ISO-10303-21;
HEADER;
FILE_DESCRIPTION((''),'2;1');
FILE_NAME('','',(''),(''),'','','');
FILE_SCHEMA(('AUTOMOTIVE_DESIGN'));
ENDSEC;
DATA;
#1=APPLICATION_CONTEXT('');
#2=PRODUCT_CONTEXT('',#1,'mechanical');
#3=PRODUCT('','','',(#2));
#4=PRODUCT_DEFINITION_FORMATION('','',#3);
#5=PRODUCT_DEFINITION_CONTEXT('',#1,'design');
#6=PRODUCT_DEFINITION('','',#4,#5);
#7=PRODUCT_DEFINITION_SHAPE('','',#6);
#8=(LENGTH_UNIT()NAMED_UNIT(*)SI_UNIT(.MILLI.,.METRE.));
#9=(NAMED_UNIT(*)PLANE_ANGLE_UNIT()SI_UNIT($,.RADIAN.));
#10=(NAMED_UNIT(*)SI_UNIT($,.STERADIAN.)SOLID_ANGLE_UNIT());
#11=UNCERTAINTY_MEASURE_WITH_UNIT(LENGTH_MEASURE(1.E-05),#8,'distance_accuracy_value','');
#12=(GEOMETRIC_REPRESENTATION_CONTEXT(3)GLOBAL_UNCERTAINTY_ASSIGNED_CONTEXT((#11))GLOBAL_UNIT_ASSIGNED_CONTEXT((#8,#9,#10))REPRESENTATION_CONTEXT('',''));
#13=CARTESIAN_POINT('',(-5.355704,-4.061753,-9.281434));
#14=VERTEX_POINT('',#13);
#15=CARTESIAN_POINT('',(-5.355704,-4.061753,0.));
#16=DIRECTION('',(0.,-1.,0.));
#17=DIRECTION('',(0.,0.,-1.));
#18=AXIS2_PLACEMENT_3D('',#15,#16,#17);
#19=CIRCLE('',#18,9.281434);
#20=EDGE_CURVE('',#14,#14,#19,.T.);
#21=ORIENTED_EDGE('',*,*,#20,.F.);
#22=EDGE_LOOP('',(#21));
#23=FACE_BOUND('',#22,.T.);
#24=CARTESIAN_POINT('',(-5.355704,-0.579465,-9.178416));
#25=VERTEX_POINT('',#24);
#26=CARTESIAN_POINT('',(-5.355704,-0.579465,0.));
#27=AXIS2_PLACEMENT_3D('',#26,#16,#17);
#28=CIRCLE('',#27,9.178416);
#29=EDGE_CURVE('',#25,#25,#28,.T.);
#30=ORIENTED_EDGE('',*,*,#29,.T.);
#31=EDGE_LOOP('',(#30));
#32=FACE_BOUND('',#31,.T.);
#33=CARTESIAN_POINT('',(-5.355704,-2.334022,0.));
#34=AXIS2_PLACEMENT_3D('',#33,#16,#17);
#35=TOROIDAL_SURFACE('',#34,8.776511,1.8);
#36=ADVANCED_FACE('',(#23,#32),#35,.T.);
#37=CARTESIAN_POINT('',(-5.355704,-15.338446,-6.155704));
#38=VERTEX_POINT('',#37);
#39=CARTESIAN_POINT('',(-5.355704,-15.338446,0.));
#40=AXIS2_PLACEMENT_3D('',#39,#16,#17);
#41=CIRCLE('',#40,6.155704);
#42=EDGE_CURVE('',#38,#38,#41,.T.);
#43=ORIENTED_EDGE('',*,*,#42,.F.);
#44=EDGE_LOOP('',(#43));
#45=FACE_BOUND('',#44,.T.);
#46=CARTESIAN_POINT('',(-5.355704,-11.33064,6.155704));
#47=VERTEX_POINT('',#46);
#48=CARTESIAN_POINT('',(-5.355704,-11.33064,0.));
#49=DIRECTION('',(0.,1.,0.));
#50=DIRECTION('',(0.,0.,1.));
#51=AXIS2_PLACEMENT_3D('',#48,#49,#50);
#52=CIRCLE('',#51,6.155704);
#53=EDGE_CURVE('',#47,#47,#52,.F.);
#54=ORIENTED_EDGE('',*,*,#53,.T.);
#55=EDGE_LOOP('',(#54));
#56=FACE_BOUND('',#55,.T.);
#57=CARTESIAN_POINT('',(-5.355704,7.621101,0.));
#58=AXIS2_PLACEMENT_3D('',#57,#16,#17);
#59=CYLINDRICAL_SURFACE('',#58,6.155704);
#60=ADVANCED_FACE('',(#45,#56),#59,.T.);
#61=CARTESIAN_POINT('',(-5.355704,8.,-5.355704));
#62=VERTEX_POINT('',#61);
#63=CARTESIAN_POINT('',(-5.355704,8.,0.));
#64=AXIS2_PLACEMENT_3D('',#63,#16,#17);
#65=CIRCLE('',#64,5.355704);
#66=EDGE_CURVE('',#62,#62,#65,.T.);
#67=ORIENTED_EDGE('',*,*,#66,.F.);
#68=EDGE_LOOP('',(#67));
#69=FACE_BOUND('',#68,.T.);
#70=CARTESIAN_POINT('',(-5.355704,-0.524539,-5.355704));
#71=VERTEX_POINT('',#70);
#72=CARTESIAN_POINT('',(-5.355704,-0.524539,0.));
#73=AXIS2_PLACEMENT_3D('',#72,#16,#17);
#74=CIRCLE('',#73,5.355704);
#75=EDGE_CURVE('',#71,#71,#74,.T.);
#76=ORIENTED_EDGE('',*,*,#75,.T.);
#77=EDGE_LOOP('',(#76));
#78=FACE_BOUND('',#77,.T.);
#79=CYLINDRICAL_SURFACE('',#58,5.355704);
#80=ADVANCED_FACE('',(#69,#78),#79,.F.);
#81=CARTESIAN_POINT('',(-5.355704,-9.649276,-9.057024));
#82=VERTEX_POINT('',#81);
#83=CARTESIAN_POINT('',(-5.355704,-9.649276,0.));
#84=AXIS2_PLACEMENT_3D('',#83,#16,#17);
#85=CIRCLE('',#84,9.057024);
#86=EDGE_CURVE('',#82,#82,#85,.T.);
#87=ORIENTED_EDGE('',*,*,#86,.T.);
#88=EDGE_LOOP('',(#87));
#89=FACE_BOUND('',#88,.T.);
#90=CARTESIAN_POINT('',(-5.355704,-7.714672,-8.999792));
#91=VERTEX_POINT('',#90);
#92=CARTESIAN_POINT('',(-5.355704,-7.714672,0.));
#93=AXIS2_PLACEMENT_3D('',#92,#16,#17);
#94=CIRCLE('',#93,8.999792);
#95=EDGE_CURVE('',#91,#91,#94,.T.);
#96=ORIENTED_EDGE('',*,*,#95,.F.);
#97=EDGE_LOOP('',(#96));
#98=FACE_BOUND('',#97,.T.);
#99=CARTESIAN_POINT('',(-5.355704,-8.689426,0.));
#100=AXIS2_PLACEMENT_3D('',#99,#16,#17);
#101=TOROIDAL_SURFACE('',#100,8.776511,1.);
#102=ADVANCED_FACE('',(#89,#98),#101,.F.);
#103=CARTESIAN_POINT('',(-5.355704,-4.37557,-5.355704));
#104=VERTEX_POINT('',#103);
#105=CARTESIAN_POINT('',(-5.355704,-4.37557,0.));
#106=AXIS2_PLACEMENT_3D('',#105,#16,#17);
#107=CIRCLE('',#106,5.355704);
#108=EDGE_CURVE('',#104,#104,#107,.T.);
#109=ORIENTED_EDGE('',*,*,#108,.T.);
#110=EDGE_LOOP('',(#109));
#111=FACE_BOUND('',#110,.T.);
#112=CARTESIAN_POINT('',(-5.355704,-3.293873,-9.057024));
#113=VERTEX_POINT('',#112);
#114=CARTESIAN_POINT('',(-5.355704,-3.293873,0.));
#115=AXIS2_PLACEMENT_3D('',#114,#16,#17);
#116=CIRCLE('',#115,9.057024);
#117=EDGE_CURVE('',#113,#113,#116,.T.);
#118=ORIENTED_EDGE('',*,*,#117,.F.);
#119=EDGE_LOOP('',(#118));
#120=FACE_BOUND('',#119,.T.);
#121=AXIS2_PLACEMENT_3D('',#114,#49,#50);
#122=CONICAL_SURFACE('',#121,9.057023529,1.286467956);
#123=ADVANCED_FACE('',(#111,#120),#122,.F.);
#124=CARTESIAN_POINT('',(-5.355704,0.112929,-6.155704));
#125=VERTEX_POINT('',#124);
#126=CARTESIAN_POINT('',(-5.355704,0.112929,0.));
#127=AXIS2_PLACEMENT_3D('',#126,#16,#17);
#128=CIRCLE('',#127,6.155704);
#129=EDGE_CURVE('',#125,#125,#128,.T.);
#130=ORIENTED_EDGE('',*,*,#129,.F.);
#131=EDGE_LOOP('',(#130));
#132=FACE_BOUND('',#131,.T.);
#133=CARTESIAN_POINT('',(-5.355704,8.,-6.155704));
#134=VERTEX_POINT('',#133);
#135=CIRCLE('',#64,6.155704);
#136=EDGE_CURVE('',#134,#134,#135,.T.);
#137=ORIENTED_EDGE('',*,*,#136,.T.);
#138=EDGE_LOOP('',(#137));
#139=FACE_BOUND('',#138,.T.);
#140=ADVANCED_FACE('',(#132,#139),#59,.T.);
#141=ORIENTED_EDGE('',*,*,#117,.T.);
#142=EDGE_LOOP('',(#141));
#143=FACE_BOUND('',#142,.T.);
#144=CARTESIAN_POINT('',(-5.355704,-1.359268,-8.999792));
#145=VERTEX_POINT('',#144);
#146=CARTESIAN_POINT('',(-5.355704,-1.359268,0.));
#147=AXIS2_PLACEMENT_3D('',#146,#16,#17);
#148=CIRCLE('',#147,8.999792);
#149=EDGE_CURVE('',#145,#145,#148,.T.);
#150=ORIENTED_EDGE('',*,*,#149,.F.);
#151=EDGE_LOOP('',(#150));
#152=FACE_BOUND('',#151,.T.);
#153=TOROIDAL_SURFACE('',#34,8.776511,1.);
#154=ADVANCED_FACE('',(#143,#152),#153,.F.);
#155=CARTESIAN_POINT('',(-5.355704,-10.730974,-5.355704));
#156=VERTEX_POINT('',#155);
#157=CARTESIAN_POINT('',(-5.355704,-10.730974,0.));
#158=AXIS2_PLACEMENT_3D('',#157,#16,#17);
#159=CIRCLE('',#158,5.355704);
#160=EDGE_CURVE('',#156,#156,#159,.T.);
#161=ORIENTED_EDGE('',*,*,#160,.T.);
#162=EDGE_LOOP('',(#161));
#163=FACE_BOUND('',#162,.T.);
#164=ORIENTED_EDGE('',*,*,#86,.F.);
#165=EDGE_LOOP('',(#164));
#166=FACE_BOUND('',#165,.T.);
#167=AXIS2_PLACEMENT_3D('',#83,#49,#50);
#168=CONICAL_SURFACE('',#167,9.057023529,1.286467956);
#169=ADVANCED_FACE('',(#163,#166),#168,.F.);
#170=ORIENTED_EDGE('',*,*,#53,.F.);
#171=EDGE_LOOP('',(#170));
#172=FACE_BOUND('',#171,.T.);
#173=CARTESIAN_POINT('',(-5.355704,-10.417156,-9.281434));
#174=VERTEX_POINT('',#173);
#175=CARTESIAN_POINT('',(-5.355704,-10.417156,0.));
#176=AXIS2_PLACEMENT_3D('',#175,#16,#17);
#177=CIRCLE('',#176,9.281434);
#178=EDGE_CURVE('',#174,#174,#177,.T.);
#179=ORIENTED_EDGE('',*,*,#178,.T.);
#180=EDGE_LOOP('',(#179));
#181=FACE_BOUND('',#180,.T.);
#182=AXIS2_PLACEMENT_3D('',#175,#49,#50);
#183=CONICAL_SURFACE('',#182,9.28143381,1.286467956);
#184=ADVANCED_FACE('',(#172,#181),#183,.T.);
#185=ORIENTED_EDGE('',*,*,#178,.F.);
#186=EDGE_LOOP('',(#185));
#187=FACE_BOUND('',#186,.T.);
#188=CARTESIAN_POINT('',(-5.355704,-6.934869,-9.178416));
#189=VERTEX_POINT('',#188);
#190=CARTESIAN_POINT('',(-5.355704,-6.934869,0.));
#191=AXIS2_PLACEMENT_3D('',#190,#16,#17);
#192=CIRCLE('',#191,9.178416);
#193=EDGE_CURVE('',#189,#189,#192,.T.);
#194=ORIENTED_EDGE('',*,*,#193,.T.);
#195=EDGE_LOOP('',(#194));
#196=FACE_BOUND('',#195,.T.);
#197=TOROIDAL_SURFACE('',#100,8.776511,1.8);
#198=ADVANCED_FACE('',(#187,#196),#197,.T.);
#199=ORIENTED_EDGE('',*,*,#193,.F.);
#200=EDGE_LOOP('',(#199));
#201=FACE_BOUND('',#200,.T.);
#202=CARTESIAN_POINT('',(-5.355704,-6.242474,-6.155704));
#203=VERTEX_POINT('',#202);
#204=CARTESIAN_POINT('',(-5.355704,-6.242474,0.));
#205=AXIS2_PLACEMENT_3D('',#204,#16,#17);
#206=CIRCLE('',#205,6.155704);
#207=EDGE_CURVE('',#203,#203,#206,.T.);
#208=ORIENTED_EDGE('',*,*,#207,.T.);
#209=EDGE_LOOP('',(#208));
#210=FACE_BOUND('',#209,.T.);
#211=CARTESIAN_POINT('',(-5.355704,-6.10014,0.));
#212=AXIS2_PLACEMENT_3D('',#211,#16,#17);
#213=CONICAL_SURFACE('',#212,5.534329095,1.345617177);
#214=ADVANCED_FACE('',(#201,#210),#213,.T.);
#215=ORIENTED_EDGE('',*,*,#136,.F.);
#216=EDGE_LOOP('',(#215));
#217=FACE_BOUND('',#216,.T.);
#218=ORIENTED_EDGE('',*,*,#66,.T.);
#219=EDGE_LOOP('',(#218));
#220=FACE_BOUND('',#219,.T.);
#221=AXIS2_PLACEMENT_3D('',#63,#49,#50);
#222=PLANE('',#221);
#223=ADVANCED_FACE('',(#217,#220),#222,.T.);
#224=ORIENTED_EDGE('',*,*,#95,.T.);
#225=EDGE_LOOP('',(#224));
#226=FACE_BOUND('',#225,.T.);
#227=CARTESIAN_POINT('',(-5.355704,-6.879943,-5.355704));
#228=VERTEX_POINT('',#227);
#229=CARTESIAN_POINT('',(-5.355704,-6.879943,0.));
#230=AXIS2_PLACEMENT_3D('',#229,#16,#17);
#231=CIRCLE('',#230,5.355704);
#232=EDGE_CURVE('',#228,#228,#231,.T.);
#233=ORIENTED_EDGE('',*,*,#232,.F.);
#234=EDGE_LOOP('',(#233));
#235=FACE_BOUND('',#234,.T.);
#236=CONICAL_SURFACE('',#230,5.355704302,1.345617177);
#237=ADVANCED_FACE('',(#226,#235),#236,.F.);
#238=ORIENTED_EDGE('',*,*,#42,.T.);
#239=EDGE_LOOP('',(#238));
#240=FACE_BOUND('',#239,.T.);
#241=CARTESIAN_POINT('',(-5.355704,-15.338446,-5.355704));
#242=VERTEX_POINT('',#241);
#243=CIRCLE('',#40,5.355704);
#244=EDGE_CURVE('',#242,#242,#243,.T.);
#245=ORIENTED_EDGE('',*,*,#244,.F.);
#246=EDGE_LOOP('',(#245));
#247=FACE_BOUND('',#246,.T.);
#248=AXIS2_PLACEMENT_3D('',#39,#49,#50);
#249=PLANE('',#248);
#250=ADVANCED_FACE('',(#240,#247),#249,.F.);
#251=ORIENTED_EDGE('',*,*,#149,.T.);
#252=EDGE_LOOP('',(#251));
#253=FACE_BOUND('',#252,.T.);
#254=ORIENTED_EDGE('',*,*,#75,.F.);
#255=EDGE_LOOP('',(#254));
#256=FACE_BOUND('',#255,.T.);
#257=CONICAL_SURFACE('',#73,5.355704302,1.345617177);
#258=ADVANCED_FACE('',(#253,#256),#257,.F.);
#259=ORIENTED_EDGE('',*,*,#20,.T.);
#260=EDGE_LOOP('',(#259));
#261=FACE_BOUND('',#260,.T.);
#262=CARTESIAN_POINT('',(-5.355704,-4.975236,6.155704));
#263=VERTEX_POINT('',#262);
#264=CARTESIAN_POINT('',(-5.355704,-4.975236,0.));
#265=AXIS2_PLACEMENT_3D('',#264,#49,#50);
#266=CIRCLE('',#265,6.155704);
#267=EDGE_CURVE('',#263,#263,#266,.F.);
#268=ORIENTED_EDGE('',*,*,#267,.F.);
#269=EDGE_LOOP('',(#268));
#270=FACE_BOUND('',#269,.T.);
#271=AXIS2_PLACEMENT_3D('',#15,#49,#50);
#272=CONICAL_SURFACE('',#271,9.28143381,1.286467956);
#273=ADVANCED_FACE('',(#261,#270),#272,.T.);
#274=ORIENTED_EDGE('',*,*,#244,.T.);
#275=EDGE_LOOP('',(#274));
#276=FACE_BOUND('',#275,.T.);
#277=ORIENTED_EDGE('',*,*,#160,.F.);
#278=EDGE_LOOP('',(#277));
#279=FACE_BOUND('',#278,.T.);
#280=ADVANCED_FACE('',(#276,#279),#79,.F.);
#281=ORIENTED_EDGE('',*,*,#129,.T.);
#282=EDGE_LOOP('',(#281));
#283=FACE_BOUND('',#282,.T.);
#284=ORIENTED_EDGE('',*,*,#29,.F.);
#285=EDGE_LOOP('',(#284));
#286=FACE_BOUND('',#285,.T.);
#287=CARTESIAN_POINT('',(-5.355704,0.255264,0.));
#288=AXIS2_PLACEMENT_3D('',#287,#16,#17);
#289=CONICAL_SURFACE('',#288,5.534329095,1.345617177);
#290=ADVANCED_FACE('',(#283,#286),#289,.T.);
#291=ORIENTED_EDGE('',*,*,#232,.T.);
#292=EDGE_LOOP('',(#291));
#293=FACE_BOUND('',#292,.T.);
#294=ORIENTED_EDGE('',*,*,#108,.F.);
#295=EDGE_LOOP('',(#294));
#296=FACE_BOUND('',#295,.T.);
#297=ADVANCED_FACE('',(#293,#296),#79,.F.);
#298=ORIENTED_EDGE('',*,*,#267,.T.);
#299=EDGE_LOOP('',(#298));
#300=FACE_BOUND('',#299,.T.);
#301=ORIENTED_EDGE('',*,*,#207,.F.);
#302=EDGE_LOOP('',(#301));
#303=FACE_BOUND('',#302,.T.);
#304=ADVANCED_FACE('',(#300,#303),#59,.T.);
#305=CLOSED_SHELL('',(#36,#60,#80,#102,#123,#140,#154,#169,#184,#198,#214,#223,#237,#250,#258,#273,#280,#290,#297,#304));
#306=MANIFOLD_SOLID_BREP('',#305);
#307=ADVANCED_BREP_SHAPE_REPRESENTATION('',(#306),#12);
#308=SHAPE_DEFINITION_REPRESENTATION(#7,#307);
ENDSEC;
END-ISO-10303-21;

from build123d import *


# Read off the part's stored shape, not the designer's step: Thicken1
with BuildPart() as part:
    # Thicken1 outline → Thicken1 (revolve)
    with BuildSketch(Plane(origin=(-5.355704302, 0, 0), x_dir=(1, 0, 0), z_dir=(0, 0, 1))):
        with BuildLine():
            Line((5.355704302, -10.730973735), (5.355704302, -15.338446063))
            Line((5.355704302, -15.338446063), (6.155704302, -15.338446063))
            Line((6.155704302, -15.338446063), (6.155704302, -11.330639888))
            Line((6.155704302, -11.330639888), (9.28143381, -10.417156479))
            ThreePointArc((9.28143381, -10.417156479), (10.575723544, -8.636199454), (9.178416464, -6.934868574))
            Line((9.178416464, -6.934868574), (6.155704302, -6.242474301))
            Line((6.155704302, -6.242474301), (6.155704302, -4.975236163))
            Line((6.155704302, -4.975236163), (9.28143381, -4.061752754))
            ThreePointArc((9.28143381, -4.061752754), (10.575723544, -2.280795729), (9.178416464, -0.579464848))
            Line((9.178416464, -0.579464848), (6.155704302, 0.112929424))
            Line((6.155704302, 0.112929424), (6.155704302, 8))
            Line((6.155704302, 8), (5.355704302, 8))
            Line((5.355704302, 8), (5.355704302, -0.524539238))
            Line((5.355704302, -0.524539238), (8.99979167, -1.359268146))
            ThreePointArc((8.99979167, -1.359268146), (9.776073381, -2.304451968), (9.057023529, -3.293872538))
            Line((9.057023529, -3.293872538), (5.355704302, -4.375570009))
            Line((5.355704302, -4.375570009), (5.355704302, -6.879942964))
            Line((5.355704302, -6.879942964), (8.99979167, -7.714671871))
            ThreePointArc((8.99979167, -7.714671871), (9.776073381, -8.659855693), (9.057023529, -9.649276263))
            Line((9.057023529, -9.649276263), (5.355704302, -10.730973735))
        make_face()
    revolve(axis=Axis((-5.355704302, 0, 0), (0, 1, 0)))


solid = part.part
